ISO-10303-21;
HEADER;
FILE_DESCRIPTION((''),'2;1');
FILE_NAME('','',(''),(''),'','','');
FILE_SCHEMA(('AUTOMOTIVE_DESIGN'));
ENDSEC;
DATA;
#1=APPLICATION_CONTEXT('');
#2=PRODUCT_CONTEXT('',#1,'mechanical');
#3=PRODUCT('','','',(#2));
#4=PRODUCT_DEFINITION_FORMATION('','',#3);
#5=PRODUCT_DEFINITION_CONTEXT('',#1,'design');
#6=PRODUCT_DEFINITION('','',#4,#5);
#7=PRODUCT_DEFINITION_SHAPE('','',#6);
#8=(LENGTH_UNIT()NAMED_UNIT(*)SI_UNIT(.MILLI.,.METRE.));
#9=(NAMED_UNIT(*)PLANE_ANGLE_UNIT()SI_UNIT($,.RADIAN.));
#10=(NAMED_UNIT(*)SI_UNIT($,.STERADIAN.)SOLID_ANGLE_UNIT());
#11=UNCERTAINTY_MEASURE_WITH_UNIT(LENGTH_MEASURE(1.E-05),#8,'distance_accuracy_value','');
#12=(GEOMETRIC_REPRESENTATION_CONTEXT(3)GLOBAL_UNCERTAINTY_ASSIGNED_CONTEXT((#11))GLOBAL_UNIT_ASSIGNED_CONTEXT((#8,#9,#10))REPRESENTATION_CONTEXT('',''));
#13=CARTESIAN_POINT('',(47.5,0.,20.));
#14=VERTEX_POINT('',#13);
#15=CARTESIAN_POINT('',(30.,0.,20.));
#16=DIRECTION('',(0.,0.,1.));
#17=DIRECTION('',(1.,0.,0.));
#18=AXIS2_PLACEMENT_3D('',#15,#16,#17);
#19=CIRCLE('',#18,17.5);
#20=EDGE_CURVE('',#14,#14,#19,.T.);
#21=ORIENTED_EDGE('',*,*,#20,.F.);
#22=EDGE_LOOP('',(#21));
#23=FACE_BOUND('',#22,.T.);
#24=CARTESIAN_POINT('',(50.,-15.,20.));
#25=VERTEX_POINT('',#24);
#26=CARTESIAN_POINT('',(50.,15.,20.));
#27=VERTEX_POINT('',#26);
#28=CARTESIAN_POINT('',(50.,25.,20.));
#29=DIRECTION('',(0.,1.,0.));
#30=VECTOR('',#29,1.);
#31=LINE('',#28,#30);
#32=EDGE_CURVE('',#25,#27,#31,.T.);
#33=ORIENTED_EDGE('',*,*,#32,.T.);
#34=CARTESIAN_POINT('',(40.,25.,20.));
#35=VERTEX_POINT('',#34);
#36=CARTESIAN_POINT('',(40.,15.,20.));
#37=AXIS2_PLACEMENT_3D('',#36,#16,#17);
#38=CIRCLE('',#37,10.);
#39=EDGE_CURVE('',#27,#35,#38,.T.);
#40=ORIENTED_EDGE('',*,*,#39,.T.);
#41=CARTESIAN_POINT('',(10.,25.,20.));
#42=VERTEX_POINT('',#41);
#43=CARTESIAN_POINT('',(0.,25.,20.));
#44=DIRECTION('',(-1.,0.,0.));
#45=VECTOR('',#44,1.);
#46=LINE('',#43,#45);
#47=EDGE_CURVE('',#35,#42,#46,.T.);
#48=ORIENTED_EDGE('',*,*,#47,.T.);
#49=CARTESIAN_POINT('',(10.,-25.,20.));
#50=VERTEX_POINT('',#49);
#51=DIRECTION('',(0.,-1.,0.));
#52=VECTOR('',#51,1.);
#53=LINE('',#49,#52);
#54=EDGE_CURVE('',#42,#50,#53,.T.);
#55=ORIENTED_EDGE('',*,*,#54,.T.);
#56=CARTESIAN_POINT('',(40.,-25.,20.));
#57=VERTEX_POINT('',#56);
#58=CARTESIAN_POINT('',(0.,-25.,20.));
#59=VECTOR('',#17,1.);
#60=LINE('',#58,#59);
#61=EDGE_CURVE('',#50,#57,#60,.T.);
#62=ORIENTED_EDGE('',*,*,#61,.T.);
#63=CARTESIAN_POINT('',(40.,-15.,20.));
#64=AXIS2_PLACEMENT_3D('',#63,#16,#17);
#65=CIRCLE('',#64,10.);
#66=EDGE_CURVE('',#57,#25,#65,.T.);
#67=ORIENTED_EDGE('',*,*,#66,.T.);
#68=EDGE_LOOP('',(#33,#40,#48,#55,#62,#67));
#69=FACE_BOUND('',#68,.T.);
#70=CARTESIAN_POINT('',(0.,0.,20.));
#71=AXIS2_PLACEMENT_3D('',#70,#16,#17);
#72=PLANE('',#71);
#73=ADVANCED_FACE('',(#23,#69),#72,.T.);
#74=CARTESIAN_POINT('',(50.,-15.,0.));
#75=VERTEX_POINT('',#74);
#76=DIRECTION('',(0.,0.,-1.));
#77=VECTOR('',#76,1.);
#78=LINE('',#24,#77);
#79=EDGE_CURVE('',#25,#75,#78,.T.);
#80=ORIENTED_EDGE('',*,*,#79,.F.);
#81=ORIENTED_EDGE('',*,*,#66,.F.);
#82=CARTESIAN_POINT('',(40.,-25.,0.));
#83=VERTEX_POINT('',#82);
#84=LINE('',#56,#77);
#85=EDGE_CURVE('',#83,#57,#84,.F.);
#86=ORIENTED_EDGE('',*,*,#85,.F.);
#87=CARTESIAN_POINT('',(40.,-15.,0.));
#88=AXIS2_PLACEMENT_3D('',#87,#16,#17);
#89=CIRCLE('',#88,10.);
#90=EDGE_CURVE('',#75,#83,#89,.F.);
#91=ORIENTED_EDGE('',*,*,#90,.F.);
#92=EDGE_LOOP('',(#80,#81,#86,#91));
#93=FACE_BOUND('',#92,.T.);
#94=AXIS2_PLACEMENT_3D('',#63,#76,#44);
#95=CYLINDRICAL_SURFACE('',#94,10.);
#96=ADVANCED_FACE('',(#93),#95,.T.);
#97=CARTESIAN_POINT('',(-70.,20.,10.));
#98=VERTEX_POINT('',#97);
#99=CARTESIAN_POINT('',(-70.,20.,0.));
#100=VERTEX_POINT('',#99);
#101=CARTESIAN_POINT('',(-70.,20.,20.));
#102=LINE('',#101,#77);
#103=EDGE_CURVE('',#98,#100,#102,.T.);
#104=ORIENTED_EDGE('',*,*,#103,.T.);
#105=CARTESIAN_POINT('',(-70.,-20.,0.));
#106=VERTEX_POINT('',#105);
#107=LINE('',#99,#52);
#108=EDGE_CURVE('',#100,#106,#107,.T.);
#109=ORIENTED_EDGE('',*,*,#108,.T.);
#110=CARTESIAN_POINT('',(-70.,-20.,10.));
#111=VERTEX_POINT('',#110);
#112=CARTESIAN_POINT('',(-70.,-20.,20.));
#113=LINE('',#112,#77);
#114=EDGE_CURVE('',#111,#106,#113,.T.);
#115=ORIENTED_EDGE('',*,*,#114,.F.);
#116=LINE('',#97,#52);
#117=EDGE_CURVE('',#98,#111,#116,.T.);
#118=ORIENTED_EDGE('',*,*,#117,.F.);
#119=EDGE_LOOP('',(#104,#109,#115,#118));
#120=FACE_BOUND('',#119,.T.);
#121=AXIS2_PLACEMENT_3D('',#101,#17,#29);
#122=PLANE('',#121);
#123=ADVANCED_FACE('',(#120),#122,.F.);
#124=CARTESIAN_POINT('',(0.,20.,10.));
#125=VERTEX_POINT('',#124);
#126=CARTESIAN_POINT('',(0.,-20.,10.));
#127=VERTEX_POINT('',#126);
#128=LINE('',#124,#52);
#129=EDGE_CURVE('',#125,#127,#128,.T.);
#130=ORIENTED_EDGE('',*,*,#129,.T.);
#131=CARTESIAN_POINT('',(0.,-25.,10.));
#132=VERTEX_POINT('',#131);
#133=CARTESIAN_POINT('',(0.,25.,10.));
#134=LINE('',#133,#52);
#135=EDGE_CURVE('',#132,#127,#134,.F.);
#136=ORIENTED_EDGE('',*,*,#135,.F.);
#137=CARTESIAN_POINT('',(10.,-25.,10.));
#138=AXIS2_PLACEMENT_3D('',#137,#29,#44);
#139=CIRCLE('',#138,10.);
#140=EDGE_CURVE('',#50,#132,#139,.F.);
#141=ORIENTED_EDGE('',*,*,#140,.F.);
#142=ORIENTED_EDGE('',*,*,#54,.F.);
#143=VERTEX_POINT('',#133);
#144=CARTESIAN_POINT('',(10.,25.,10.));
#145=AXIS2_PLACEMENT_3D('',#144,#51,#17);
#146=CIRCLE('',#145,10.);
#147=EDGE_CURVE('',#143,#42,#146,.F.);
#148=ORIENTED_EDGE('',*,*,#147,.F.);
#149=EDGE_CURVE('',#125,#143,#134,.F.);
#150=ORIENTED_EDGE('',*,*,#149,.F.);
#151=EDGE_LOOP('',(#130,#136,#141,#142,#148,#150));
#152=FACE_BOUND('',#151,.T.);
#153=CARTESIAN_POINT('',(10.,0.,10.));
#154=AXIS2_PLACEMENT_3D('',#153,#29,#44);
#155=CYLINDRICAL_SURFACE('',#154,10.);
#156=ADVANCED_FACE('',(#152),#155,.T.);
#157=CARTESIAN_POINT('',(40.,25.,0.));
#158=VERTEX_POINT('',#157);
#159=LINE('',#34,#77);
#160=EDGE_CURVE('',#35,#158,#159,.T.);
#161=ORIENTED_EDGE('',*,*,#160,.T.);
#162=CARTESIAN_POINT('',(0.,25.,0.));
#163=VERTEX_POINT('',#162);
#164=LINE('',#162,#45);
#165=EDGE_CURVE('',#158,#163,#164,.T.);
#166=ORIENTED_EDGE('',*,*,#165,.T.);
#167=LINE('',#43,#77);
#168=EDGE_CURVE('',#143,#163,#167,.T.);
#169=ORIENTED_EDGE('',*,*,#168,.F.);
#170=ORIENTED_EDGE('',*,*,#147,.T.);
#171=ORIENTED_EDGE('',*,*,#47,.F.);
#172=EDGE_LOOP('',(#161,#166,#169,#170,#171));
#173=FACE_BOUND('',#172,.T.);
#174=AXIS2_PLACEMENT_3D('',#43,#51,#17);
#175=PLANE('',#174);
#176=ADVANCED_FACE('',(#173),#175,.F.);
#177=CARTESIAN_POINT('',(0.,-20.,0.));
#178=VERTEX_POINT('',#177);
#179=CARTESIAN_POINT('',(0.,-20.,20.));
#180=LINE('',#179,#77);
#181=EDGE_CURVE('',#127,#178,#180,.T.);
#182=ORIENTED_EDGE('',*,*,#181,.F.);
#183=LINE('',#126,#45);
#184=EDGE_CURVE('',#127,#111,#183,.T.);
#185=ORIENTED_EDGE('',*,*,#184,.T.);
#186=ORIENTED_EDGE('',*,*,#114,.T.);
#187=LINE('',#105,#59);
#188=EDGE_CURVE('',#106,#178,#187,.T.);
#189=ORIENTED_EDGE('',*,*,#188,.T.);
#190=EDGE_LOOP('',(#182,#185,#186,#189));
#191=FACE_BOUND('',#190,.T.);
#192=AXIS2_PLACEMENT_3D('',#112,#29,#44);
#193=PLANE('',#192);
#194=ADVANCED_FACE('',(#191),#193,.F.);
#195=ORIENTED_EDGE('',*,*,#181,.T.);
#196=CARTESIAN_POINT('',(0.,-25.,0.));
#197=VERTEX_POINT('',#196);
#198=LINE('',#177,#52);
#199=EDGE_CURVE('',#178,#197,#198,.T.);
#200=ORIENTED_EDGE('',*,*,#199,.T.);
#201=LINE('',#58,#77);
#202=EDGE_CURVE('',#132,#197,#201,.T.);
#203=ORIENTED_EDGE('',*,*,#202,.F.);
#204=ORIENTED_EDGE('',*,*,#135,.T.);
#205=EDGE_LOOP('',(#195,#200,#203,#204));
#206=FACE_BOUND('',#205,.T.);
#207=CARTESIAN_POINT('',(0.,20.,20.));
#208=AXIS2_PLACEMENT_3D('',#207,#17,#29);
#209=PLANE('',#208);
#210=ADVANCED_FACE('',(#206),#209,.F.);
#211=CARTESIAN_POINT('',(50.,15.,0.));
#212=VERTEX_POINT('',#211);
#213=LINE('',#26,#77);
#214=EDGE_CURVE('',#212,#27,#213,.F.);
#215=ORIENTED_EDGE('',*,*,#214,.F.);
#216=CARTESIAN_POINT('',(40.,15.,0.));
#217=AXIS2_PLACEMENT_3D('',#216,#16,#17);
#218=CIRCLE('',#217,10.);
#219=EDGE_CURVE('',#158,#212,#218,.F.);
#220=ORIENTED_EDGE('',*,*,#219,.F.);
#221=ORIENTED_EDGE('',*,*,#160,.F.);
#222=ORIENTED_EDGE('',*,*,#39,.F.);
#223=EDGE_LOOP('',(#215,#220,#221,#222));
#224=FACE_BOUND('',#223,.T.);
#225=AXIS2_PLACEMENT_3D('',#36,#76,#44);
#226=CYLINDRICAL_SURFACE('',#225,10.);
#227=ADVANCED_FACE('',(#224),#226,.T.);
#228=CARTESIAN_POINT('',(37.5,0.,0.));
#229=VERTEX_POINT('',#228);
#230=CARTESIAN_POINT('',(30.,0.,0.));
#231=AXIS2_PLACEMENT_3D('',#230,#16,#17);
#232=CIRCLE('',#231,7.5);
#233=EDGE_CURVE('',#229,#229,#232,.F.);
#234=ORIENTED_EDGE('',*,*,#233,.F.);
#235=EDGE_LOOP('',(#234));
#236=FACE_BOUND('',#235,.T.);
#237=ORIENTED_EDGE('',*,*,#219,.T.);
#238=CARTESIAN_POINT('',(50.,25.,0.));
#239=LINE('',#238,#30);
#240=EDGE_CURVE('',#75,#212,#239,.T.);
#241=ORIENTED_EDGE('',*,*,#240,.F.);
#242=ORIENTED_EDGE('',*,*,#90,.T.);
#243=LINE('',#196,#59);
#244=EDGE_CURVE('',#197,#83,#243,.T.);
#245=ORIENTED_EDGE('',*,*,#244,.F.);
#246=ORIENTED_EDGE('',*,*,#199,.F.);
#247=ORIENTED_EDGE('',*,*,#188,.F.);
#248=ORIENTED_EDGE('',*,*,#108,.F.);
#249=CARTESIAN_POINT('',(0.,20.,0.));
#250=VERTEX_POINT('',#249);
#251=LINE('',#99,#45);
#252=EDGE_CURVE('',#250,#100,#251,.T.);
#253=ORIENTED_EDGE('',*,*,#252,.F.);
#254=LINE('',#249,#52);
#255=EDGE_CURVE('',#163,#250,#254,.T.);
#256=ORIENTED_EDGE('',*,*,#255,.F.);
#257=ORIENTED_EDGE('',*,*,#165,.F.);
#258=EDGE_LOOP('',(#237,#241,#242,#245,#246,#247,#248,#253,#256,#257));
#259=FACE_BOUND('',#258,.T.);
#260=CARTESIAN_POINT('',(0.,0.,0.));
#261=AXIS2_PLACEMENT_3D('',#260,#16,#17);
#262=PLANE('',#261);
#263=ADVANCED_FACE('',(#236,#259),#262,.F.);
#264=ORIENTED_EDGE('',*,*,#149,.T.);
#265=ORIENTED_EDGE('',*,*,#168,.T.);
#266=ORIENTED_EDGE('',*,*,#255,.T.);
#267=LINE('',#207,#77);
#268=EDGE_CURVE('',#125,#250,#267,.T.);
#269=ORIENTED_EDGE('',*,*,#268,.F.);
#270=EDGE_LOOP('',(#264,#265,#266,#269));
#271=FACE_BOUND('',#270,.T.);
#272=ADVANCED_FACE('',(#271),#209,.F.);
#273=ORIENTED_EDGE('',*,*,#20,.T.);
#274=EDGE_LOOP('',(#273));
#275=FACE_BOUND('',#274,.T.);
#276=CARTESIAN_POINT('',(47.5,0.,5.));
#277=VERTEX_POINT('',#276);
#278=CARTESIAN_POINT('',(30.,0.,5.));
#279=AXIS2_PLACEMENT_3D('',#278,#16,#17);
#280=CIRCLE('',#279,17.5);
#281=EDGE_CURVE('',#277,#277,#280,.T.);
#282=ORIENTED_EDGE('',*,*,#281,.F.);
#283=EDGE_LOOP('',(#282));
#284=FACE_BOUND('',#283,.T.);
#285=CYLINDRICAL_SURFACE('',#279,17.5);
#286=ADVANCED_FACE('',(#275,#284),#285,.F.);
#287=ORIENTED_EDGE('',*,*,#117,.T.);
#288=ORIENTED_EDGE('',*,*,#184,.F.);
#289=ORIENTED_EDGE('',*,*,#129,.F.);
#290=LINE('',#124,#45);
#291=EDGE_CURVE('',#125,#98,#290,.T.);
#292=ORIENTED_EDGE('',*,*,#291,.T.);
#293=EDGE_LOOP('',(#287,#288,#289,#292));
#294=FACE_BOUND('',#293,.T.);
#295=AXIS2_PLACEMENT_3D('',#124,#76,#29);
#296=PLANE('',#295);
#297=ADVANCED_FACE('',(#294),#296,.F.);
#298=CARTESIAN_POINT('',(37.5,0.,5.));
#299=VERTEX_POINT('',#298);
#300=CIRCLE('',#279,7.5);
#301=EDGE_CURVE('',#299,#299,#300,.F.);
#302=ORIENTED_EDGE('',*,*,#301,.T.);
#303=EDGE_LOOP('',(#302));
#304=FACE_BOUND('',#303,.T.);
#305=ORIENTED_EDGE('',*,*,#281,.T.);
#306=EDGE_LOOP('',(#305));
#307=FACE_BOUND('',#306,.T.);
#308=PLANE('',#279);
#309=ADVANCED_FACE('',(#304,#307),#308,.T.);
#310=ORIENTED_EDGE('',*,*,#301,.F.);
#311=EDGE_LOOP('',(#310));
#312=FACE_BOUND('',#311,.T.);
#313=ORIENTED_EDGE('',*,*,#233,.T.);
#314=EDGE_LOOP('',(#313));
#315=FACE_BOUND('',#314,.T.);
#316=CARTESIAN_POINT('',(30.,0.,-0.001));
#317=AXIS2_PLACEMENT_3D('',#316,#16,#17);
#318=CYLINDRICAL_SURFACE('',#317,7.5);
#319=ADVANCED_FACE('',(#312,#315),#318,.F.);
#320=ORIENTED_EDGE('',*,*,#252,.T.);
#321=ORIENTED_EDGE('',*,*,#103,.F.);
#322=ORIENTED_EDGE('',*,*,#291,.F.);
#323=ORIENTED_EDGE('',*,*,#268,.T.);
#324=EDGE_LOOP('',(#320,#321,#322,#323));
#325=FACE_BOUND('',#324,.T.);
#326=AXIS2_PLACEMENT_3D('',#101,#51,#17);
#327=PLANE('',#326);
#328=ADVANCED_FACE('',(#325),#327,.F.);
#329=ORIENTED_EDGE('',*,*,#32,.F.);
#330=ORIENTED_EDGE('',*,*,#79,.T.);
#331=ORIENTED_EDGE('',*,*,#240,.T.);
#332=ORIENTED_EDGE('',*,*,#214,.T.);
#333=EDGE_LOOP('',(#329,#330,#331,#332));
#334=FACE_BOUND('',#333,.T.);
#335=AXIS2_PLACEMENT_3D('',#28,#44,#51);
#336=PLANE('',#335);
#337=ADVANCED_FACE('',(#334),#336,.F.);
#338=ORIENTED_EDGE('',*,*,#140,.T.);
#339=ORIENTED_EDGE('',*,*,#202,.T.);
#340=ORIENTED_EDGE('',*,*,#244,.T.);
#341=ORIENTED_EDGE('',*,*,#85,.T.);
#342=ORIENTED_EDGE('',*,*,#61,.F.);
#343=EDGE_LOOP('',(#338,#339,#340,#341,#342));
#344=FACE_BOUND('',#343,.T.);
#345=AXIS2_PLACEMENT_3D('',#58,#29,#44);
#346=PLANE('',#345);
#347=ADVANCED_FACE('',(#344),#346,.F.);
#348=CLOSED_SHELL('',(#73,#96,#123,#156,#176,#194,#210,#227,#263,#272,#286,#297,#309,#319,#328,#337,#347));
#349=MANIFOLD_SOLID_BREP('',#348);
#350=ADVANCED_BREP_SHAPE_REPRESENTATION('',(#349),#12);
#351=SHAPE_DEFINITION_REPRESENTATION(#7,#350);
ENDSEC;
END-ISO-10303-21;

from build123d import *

# Parameters (mm, degrees)
BOSS_EXTRUDE1_DEPTH = 20
CUT_EXTRUDE1_REACH  = 78.974
SKETCH2_R           = 7.5
SKETCH3_R           = 17.5
CUT_EXTRUDE2_DEPTH  = 15
SKETCH4_W           = 10
SKETCH4_H           = 40
CUT_EXTRUDE3_DEPTH  = 70
FILLET1_R           = 10
FILLET2_START       = -26
FILLET2_DEPTH       = 52


with BuildPart() as part:
    # Sketch1 → Boss-Extrude1 (new body)
    with BuildSketch(Plane.XY):
        Polygon((-70, 20), (0, 20), (0, 25), (50, 25), (50, -25), (0, -25), (0, -20), (-70, -20), align=None)
    extrude(amount=BOSS_EXTRUDE1_DEPTH)

    # Sketch2 → Cut-Extrude1 (cut, up to next)
    with BuildSketch(Plane.XY.offset(20), mode=Mode.PRIVATE) as cut_extrude1_sk1:
        with Locations((30, 0)):
            Circle(SKETCH2_R)
    cut_extrude1_tool1 = extrude(cut_extrude1_sk1.sketch, amount=-CUT_EXTRUDE1_REACH, mode=Mode.PRIVATE) & part.part
    add(cut_extrude1_tool1.solids().sort_by_distance((30, 0, 20))[0], mode=Mode.SUBTRACT)

    # Sketch3 → Cut-Extrude2 (cut)
    with BuildSketch(Plane.XY.offset(20)):
        with Locations((30, 0)):
            Circle(SKETCH3_R)
    extrude(amount=-CUT_EXTRUDE2_DEPTH, mode=Mode.SUBTRACT)

    # Sketch4 → Cut-Extrude3 (cut)
    with BuildSketch(Plane.ZY.offset(70)):
        with Locations((15, 0)):
            Rectangle(SKETCH4_W, SKETCH4_H)
    extrude(amount=-CUT_EXTRUDE3_DEPTH, mode=Mode.SUBTRACT)

    # Fillet1
    fillet1_edges = [part.edges().sort_by_distance(p)[0] for p in [
        (50, 25, 10),
        (50, -25, 10),
    ]]
    fillet(fillet1_edges, radius=FILLET1_R)

    # Fillet2: read off the stored shape, not the designer's step
    # Fillet2 outline → Fillet2 (cut)
    with BuildSketch(Plane(origin=(0, 0, 0), x_dir=(1, 0, 0), z_dir=(0, 1, 0)).offset(FILLET2_START)):
        with BuildLine():
            ThreePointArc((10, -20), (2.928932188, -17.071067812), (0, -10))
            Line((0, -10), (0, -20))
            Line((0, -20), (10, -20))
        make_face()
    extrude(amount=FILLET2_DEPTH, mode=Mode.SUBTRACT)


solid = part.part
